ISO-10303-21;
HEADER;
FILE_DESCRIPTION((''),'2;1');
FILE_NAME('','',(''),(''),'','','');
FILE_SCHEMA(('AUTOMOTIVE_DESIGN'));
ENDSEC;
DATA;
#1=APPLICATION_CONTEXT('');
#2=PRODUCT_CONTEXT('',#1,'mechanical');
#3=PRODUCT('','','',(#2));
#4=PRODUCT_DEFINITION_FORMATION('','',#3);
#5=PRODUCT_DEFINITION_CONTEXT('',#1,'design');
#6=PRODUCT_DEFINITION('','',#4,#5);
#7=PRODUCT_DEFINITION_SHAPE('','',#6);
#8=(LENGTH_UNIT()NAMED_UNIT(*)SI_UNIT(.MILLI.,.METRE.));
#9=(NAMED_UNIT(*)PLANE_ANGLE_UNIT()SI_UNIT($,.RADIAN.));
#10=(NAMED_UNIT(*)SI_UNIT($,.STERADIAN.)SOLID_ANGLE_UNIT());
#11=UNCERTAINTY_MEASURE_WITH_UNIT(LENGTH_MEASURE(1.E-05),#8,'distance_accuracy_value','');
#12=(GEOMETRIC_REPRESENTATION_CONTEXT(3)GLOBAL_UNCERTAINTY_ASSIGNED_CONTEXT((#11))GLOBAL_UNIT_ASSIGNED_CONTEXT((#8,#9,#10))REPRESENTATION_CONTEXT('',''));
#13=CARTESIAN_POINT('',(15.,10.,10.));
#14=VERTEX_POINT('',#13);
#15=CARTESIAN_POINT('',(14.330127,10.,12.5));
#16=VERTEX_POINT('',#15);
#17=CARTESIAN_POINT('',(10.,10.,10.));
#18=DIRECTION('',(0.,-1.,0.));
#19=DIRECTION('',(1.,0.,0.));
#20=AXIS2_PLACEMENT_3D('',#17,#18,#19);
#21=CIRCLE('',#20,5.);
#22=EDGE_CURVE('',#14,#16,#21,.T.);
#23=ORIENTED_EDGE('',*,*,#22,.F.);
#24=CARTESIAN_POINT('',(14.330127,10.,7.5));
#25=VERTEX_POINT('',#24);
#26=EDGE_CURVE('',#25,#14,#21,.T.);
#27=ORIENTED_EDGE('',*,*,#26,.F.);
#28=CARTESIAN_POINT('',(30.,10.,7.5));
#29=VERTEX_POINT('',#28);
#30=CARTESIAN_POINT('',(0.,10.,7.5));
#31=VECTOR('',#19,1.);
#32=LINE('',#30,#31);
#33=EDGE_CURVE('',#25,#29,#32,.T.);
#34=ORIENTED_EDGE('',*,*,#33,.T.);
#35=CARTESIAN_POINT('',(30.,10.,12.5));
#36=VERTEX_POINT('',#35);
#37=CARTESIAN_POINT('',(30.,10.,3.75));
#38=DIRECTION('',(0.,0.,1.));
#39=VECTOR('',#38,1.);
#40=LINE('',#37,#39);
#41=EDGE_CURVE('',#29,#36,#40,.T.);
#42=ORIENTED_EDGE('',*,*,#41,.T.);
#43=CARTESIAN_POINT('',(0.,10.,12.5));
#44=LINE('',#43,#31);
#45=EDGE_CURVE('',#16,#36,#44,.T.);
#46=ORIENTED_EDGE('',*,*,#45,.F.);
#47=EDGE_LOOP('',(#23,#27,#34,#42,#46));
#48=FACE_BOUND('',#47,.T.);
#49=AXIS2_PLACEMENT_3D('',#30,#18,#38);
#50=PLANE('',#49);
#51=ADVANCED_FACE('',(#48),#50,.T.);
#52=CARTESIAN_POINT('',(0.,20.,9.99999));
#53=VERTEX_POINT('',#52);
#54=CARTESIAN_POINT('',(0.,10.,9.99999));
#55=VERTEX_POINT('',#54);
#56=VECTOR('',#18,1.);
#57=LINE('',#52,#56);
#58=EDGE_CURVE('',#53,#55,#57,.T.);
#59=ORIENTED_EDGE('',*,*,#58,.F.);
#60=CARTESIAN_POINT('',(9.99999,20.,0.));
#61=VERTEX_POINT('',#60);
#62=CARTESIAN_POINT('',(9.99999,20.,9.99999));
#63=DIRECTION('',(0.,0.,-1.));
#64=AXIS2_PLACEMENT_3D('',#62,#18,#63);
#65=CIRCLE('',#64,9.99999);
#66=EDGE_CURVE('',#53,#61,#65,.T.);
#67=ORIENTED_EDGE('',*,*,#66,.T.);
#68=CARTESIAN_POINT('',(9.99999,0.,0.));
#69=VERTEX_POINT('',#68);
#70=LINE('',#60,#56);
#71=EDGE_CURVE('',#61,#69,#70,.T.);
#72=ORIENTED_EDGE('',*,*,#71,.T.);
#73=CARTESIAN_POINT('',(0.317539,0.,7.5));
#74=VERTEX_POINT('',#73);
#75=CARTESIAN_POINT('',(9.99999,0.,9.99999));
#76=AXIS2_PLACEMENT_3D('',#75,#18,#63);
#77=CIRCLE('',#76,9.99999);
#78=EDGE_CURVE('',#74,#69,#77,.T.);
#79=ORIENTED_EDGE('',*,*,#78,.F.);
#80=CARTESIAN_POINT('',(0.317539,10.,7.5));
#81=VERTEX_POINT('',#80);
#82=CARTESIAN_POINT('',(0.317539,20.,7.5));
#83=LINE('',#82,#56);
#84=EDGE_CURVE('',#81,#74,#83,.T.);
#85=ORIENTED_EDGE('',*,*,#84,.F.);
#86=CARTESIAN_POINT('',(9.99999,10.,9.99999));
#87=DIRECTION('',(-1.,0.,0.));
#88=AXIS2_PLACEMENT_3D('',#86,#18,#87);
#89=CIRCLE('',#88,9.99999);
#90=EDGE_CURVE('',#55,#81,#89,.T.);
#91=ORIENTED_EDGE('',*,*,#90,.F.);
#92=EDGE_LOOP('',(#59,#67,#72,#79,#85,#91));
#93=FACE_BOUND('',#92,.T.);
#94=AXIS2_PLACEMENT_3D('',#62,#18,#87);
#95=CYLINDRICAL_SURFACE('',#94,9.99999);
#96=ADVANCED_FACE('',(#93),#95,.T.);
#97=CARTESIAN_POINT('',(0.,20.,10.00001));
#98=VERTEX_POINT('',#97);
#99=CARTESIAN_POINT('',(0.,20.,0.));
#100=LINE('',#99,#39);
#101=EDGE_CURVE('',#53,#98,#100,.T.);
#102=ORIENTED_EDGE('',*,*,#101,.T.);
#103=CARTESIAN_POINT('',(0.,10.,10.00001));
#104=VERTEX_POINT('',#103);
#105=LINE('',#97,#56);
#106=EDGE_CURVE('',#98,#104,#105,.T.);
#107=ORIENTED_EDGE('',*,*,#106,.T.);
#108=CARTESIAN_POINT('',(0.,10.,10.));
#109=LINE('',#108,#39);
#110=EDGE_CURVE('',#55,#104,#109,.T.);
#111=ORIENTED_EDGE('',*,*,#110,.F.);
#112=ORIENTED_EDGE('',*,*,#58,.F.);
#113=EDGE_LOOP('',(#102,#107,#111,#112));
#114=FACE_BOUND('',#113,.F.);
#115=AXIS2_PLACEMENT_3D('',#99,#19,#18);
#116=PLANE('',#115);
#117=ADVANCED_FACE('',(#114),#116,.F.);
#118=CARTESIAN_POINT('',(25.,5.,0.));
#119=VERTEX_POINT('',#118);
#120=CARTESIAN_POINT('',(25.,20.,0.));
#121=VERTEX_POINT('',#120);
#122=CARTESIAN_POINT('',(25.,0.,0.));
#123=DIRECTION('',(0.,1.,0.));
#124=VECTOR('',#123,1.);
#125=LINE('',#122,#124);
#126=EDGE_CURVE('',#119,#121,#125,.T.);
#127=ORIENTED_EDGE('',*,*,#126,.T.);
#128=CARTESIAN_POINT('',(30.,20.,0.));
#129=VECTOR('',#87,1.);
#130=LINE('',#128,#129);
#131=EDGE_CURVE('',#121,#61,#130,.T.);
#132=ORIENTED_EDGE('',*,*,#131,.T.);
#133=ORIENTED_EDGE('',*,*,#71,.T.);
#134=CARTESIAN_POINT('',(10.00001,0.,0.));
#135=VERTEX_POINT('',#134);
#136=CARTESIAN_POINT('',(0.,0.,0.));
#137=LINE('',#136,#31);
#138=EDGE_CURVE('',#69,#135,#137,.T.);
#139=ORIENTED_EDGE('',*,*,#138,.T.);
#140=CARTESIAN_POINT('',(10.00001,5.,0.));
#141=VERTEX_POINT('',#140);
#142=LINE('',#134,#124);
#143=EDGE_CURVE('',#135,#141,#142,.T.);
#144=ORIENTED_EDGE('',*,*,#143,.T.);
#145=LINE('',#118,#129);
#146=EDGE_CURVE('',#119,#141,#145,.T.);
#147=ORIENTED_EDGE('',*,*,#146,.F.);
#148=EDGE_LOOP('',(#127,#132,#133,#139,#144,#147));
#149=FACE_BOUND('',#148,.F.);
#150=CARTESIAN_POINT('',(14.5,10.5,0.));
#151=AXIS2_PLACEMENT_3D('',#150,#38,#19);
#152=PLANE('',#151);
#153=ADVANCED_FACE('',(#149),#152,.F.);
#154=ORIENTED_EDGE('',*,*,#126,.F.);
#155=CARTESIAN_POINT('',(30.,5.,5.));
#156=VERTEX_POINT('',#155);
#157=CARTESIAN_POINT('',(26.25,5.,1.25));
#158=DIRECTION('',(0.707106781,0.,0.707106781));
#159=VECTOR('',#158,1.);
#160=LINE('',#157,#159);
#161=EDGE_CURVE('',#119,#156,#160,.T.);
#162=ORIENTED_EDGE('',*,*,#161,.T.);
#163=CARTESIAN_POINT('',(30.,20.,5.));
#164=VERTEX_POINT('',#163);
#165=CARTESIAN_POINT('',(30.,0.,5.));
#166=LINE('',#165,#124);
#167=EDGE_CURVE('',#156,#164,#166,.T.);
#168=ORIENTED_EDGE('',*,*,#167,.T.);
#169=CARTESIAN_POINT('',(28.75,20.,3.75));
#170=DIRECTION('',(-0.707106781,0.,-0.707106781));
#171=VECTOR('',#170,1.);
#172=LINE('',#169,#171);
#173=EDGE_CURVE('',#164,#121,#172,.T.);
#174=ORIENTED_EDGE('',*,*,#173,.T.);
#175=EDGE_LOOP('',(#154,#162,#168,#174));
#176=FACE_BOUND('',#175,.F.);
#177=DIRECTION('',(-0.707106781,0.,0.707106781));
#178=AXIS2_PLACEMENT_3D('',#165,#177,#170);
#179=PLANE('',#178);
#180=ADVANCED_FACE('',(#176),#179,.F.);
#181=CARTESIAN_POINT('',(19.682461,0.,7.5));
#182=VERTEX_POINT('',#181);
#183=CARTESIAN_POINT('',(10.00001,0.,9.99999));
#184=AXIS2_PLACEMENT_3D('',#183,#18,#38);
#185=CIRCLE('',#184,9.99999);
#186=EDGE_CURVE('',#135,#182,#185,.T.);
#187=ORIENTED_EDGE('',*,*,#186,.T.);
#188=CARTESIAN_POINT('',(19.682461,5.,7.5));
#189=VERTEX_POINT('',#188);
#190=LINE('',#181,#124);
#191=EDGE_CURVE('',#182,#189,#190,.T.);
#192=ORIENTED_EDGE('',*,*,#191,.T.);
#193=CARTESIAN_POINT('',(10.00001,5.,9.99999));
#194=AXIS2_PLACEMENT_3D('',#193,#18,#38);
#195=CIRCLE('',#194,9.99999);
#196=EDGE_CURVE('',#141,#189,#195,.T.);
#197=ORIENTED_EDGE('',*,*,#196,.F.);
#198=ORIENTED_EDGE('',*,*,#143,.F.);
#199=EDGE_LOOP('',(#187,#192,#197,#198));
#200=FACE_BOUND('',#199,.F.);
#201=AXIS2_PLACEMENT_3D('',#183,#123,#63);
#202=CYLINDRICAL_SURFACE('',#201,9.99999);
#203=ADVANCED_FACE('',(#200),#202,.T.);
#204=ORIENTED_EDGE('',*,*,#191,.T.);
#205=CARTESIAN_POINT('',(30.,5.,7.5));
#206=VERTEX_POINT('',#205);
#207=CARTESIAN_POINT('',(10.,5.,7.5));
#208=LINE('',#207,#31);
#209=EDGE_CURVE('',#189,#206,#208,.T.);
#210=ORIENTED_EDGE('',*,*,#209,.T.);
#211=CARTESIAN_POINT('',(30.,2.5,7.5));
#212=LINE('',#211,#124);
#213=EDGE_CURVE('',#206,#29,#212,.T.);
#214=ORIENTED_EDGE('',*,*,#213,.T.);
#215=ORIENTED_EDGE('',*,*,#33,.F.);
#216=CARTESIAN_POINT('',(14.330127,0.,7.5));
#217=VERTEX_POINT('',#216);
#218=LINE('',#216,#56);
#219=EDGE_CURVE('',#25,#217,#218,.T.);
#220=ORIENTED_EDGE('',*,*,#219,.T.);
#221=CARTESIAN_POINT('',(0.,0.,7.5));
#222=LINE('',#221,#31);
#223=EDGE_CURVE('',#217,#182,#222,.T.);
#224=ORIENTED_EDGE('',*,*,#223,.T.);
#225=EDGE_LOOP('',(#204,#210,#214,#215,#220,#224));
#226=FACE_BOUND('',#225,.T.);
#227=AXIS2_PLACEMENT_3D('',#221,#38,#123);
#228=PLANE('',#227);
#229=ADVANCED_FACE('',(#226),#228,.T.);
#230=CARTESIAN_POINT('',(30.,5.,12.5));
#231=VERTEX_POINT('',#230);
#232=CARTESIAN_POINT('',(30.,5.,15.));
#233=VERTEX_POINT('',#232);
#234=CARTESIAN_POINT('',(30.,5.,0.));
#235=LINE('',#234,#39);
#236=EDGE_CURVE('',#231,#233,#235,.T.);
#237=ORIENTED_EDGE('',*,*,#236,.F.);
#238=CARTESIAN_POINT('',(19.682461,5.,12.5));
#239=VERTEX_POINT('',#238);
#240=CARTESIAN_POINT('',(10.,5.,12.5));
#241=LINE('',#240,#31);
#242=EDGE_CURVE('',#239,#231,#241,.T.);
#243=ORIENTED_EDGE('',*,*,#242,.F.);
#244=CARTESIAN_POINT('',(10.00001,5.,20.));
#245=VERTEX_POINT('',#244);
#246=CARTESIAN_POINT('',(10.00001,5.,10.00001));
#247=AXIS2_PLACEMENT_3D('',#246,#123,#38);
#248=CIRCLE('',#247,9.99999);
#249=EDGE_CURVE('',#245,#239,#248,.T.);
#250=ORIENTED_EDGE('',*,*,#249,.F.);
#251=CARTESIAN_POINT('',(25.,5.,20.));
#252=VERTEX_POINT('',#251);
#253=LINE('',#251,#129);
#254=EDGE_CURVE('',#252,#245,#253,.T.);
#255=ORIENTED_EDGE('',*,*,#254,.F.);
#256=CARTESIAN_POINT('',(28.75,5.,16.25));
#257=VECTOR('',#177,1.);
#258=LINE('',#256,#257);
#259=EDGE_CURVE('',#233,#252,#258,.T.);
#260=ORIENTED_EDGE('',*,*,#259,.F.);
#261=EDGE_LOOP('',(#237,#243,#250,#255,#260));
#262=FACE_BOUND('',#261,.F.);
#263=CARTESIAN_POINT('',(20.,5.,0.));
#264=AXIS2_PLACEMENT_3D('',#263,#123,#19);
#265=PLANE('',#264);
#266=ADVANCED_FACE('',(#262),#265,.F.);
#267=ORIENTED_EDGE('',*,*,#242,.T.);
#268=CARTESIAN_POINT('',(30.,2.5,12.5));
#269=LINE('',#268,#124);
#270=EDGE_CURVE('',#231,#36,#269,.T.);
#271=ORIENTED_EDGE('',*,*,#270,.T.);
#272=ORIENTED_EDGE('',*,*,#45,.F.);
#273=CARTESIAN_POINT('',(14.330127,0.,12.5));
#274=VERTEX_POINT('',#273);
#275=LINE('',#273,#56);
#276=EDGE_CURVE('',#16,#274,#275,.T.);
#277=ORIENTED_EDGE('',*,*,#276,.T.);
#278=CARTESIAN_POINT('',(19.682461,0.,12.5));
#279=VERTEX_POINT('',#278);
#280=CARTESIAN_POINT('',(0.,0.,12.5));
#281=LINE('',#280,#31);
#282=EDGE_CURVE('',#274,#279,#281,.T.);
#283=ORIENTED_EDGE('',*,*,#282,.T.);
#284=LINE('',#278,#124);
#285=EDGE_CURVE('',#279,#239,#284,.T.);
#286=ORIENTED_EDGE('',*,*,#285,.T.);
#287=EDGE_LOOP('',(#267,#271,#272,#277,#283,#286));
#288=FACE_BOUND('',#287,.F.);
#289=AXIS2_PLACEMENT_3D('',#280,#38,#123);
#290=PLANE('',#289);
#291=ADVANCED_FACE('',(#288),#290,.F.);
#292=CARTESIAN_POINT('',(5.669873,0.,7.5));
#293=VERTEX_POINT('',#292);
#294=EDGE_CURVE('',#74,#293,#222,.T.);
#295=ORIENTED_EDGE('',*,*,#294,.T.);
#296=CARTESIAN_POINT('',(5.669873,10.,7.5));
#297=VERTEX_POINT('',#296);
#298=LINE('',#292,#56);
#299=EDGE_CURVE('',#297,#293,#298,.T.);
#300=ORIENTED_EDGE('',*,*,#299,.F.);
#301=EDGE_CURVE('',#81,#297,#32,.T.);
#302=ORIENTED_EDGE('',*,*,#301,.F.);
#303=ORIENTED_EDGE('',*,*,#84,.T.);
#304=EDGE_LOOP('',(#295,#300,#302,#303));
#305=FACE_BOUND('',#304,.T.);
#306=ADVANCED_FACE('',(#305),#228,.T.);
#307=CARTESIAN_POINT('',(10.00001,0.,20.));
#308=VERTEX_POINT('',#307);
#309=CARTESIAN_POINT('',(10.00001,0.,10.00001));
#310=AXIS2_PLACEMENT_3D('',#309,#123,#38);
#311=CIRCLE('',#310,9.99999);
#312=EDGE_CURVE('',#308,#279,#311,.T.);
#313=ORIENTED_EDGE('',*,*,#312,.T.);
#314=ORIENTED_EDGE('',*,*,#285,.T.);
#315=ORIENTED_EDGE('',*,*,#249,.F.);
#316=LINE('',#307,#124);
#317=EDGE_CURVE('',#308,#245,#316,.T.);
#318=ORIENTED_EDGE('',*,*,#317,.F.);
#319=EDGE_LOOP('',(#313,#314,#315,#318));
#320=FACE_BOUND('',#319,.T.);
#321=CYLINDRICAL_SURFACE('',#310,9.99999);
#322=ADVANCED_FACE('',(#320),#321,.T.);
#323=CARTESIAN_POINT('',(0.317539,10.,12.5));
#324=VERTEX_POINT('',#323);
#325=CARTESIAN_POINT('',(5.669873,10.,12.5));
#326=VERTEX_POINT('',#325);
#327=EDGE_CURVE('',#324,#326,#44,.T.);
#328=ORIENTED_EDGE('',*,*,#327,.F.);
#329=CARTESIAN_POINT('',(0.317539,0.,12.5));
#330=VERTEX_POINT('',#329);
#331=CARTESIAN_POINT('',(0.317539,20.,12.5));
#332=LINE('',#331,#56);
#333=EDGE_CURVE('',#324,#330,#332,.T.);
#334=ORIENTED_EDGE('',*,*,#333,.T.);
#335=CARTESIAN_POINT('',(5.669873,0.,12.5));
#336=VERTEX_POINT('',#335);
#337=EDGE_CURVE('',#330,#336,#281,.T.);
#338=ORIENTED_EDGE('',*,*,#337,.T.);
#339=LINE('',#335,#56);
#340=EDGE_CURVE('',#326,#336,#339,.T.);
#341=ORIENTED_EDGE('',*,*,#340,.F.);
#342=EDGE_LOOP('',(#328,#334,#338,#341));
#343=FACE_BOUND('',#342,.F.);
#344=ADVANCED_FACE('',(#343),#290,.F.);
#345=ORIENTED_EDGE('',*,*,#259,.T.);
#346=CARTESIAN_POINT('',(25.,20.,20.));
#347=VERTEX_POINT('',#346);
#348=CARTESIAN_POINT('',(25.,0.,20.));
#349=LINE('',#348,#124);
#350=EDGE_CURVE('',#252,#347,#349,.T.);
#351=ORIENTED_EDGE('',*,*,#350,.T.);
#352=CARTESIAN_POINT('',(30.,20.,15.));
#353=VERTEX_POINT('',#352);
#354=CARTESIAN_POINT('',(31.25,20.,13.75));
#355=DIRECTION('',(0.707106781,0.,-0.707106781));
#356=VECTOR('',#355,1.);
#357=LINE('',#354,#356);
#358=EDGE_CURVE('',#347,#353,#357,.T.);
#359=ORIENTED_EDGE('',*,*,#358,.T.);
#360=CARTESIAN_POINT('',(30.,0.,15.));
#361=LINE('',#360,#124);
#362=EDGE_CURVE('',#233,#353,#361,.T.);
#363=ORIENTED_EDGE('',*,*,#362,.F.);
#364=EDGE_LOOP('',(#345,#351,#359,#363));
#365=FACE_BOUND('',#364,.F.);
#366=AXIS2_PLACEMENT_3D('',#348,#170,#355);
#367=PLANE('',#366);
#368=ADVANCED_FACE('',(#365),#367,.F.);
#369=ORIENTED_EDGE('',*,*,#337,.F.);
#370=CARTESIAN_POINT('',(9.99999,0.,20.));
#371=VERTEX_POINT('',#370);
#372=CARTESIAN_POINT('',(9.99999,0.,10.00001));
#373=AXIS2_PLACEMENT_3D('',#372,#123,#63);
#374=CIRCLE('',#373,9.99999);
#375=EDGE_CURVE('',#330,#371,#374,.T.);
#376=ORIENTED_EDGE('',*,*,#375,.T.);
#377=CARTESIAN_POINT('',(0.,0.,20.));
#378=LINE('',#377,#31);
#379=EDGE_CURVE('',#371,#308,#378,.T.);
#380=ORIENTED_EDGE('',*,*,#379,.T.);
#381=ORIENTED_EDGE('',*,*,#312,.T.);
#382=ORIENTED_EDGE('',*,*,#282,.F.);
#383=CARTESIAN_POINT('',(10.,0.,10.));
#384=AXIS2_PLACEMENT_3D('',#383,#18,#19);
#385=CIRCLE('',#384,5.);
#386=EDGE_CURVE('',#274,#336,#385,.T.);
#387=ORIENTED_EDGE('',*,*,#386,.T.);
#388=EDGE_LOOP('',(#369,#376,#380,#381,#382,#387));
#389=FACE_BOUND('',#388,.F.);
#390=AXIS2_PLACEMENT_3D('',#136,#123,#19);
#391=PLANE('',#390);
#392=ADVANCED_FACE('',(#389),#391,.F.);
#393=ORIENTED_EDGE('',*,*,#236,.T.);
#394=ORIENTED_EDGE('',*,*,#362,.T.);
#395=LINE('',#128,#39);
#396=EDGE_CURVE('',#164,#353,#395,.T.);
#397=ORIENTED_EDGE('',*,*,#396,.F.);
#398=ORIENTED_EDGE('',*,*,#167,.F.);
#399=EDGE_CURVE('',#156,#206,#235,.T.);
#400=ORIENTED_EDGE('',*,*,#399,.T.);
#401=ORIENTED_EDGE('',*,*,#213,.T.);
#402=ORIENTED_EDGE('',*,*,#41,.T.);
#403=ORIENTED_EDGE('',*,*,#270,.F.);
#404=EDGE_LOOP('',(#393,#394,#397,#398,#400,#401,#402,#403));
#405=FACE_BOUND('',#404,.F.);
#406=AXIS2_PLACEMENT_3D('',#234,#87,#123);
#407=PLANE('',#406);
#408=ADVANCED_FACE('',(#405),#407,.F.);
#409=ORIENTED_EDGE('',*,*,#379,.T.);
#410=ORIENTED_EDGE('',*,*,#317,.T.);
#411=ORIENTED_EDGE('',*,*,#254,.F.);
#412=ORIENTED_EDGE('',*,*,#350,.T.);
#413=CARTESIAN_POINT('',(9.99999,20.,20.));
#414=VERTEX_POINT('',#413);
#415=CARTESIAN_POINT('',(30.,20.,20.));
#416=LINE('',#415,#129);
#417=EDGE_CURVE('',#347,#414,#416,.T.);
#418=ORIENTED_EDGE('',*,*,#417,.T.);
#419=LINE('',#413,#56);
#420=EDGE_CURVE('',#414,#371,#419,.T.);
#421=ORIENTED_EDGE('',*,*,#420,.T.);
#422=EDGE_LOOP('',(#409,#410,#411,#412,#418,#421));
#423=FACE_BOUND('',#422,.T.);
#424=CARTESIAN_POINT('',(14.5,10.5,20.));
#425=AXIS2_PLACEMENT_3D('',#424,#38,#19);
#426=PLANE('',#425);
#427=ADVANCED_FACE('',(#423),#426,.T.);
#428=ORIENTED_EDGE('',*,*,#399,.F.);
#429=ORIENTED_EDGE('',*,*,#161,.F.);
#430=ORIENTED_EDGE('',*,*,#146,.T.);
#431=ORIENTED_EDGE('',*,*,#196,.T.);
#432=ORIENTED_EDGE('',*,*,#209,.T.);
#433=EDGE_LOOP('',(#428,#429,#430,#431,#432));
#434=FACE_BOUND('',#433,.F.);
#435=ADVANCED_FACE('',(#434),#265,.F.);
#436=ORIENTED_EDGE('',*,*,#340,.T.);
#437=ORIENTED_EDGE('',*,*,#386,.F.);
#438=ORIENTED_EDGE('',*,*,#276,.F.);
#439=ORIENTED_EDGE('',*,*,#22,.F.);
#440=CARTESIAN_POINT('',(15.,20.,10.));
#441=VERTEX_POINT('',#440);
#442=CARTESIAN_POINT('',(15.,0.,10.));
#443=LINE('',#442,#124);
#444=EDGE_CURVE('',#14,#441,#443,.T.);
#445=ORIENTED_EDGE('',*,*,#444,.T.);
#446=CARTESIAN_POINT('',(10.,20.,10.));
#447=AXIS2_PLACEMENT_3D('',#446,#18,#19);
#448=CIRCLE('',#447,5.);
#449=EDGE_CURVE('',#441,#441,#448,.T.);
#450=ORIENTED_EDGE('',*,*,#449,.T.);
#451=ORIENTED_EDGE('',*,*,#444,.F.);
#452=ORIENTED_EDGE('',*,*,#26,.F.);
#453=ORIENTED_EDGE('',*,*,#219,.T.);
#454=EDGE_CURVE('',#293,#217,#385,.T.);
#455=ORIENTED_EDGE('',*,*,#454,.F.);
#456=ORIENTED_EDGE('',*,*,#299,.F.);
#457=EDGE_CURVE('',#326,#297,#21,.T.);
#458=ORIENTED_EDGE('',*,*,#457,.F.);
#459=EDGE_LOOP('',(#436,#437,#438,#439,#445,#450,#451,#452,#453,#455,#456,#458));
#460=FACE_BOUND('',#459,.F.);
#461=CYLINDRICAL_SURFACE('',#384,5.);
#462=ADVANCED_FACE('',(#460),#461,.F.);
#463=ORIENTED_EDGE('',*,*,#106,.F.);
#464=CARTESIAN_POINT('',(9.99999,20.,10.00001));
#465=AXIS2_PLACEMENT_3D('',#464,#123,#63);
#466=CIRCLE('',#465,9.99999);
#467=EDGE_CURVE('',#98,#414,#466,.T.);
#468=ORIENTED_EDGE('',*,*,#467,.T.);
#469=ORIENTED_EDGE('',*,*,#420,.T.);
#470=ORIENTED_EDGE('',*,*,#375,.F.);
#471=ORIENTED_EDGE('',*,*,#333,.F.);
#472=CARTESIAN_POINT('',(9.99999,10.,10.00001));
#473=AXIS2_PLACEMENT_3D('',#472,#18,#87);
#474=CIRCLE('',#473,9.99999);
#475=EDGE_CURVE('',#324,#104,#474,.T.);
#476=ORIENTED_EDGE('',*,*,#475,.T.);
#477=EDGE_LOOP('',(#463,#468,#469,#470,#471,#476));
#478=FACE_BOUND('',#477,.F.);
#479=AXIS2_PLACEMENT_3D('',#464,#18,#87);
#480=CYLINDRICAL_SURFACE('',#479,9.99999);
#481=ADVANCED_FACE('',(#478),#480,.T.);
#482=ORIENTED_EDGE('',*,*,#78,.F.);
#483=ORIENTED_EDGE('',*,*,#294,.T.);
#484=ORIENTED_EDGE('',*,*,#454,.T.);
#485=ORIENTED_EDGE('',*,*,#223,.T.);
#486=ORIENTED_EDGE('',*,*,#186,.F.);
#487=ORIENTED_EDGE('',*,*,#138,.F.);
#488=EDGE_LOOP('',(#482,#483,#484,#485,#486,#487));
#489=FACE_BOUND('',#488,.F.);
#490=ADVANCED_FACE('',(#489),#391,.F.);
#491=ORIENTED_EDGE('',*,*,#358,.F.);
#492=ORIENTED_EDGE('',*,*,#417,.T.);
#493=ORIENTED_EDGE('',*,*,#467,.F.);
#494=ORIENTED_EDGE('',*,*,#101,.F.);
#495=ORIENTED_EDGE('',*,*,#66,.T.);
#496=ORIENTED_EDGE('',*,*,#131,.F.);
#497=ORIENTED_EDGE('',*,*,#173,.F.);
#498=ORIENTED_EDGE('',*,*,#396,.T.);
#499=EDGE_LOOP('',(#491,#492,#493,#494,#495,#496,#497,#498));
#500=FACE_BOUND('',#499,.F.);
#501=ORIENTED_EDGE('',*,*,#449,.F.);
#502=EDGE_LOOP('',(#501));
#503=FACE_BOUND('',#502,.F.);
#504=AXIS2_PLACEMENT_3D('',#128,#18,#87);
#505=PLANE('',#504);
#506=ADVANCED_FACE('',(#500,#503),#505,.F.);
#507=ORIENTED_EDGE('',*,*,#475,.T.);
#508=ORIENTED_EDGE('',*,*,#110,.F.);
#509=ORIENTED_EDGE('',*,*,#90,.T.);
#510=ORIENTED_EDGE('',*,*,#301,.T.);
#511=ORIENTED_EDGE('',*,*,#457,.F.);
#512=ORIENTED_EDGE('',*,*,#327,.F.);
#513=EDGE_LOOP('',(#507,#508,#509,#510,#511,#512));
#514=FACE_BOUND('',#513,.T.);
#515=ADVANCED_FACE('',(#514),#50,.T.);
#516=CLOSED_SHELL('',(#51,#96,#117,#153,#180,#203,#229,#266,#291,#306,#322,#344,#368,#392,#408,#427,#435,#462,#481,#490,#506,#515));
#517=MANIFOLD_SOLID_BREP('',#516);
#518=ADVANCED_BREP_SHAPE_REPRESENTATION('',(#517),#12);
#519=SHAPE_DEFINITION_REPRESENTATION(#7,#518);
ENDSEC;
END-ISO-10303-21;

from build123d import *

# Parameters (mm, degrees)
F1_DEPTH = 20
F2_R     = 9.99999
F4_DEPTH = 25
F5_R     = 5
F6_DEPTH = 20.001
F7_R     = 9.99999
F8_W     = 10
F8_H     = 5
F9_DEPTH = 30.001


# Not quite as in the source:
# - a fillet or chamfer is up to 0.001 mm smaller than in the source, because OpenCascade refuses the exact size


with BuildPart() as f1:
    # F0 (on Top) → F1 (new body)
    with BuildSketch(Plane.XY):
        Polygon((30, 20), (0, 20), (0, 0), (20, 0), (20, 5), (30, 5), align=None)
    extrude(amount=F1_DEPTH)

    # F2 (radius 10 in the source; OpenCascade refuses exactly that, so slightly less here)
    f2_edges = [f1.edges().sort_by_distance(p)[0] for p in [
        (0, 10, 20),
        (0, 10, 0),
    ]]
    fillet(f2_edges, radius=F2_R)

    # F3 (on Front) → F4 (cut)
    with BuildSketch(Plane.XZ):
        Polygon((30, 20), (25, 20), (30, 15), align=None)
        Polygon((30, 0), (30, 5), (25, 0), align=None)
    extrude(amount=-F4_DEPTH, mode=Mode.SUBTRACT)

    # F5 (on face) → F6 (cut, through all)
    with BuildSketch(Plane.XZ):
        with Locations((10, 10)):
            Circle(F5_R)
    extrude(amount=-F6_DEPTH, mode=Mode.SUBTRACT)

    # F7 (radius 10 in the source; OpenCascade refuses exactly that, so slightly less here)
    f7_edges = [f1.edges().sort_by_distance(p)[0] for p in [
        (20, 2.5, 20),
        (20, 2.5, 0),
    ]]
    fillet(f7_edges, radius=F7_R)

    # F8 (on Right) → F9 (cut, through all)
    with BuildSketch(Plane.YZ):
        with Locations((5, 10)):
            Rectangle(F8_W, F8_H)
    extrude(amount=F9_DEPTH, mode=Mode.SUBTRACT)


solid = f1.part
